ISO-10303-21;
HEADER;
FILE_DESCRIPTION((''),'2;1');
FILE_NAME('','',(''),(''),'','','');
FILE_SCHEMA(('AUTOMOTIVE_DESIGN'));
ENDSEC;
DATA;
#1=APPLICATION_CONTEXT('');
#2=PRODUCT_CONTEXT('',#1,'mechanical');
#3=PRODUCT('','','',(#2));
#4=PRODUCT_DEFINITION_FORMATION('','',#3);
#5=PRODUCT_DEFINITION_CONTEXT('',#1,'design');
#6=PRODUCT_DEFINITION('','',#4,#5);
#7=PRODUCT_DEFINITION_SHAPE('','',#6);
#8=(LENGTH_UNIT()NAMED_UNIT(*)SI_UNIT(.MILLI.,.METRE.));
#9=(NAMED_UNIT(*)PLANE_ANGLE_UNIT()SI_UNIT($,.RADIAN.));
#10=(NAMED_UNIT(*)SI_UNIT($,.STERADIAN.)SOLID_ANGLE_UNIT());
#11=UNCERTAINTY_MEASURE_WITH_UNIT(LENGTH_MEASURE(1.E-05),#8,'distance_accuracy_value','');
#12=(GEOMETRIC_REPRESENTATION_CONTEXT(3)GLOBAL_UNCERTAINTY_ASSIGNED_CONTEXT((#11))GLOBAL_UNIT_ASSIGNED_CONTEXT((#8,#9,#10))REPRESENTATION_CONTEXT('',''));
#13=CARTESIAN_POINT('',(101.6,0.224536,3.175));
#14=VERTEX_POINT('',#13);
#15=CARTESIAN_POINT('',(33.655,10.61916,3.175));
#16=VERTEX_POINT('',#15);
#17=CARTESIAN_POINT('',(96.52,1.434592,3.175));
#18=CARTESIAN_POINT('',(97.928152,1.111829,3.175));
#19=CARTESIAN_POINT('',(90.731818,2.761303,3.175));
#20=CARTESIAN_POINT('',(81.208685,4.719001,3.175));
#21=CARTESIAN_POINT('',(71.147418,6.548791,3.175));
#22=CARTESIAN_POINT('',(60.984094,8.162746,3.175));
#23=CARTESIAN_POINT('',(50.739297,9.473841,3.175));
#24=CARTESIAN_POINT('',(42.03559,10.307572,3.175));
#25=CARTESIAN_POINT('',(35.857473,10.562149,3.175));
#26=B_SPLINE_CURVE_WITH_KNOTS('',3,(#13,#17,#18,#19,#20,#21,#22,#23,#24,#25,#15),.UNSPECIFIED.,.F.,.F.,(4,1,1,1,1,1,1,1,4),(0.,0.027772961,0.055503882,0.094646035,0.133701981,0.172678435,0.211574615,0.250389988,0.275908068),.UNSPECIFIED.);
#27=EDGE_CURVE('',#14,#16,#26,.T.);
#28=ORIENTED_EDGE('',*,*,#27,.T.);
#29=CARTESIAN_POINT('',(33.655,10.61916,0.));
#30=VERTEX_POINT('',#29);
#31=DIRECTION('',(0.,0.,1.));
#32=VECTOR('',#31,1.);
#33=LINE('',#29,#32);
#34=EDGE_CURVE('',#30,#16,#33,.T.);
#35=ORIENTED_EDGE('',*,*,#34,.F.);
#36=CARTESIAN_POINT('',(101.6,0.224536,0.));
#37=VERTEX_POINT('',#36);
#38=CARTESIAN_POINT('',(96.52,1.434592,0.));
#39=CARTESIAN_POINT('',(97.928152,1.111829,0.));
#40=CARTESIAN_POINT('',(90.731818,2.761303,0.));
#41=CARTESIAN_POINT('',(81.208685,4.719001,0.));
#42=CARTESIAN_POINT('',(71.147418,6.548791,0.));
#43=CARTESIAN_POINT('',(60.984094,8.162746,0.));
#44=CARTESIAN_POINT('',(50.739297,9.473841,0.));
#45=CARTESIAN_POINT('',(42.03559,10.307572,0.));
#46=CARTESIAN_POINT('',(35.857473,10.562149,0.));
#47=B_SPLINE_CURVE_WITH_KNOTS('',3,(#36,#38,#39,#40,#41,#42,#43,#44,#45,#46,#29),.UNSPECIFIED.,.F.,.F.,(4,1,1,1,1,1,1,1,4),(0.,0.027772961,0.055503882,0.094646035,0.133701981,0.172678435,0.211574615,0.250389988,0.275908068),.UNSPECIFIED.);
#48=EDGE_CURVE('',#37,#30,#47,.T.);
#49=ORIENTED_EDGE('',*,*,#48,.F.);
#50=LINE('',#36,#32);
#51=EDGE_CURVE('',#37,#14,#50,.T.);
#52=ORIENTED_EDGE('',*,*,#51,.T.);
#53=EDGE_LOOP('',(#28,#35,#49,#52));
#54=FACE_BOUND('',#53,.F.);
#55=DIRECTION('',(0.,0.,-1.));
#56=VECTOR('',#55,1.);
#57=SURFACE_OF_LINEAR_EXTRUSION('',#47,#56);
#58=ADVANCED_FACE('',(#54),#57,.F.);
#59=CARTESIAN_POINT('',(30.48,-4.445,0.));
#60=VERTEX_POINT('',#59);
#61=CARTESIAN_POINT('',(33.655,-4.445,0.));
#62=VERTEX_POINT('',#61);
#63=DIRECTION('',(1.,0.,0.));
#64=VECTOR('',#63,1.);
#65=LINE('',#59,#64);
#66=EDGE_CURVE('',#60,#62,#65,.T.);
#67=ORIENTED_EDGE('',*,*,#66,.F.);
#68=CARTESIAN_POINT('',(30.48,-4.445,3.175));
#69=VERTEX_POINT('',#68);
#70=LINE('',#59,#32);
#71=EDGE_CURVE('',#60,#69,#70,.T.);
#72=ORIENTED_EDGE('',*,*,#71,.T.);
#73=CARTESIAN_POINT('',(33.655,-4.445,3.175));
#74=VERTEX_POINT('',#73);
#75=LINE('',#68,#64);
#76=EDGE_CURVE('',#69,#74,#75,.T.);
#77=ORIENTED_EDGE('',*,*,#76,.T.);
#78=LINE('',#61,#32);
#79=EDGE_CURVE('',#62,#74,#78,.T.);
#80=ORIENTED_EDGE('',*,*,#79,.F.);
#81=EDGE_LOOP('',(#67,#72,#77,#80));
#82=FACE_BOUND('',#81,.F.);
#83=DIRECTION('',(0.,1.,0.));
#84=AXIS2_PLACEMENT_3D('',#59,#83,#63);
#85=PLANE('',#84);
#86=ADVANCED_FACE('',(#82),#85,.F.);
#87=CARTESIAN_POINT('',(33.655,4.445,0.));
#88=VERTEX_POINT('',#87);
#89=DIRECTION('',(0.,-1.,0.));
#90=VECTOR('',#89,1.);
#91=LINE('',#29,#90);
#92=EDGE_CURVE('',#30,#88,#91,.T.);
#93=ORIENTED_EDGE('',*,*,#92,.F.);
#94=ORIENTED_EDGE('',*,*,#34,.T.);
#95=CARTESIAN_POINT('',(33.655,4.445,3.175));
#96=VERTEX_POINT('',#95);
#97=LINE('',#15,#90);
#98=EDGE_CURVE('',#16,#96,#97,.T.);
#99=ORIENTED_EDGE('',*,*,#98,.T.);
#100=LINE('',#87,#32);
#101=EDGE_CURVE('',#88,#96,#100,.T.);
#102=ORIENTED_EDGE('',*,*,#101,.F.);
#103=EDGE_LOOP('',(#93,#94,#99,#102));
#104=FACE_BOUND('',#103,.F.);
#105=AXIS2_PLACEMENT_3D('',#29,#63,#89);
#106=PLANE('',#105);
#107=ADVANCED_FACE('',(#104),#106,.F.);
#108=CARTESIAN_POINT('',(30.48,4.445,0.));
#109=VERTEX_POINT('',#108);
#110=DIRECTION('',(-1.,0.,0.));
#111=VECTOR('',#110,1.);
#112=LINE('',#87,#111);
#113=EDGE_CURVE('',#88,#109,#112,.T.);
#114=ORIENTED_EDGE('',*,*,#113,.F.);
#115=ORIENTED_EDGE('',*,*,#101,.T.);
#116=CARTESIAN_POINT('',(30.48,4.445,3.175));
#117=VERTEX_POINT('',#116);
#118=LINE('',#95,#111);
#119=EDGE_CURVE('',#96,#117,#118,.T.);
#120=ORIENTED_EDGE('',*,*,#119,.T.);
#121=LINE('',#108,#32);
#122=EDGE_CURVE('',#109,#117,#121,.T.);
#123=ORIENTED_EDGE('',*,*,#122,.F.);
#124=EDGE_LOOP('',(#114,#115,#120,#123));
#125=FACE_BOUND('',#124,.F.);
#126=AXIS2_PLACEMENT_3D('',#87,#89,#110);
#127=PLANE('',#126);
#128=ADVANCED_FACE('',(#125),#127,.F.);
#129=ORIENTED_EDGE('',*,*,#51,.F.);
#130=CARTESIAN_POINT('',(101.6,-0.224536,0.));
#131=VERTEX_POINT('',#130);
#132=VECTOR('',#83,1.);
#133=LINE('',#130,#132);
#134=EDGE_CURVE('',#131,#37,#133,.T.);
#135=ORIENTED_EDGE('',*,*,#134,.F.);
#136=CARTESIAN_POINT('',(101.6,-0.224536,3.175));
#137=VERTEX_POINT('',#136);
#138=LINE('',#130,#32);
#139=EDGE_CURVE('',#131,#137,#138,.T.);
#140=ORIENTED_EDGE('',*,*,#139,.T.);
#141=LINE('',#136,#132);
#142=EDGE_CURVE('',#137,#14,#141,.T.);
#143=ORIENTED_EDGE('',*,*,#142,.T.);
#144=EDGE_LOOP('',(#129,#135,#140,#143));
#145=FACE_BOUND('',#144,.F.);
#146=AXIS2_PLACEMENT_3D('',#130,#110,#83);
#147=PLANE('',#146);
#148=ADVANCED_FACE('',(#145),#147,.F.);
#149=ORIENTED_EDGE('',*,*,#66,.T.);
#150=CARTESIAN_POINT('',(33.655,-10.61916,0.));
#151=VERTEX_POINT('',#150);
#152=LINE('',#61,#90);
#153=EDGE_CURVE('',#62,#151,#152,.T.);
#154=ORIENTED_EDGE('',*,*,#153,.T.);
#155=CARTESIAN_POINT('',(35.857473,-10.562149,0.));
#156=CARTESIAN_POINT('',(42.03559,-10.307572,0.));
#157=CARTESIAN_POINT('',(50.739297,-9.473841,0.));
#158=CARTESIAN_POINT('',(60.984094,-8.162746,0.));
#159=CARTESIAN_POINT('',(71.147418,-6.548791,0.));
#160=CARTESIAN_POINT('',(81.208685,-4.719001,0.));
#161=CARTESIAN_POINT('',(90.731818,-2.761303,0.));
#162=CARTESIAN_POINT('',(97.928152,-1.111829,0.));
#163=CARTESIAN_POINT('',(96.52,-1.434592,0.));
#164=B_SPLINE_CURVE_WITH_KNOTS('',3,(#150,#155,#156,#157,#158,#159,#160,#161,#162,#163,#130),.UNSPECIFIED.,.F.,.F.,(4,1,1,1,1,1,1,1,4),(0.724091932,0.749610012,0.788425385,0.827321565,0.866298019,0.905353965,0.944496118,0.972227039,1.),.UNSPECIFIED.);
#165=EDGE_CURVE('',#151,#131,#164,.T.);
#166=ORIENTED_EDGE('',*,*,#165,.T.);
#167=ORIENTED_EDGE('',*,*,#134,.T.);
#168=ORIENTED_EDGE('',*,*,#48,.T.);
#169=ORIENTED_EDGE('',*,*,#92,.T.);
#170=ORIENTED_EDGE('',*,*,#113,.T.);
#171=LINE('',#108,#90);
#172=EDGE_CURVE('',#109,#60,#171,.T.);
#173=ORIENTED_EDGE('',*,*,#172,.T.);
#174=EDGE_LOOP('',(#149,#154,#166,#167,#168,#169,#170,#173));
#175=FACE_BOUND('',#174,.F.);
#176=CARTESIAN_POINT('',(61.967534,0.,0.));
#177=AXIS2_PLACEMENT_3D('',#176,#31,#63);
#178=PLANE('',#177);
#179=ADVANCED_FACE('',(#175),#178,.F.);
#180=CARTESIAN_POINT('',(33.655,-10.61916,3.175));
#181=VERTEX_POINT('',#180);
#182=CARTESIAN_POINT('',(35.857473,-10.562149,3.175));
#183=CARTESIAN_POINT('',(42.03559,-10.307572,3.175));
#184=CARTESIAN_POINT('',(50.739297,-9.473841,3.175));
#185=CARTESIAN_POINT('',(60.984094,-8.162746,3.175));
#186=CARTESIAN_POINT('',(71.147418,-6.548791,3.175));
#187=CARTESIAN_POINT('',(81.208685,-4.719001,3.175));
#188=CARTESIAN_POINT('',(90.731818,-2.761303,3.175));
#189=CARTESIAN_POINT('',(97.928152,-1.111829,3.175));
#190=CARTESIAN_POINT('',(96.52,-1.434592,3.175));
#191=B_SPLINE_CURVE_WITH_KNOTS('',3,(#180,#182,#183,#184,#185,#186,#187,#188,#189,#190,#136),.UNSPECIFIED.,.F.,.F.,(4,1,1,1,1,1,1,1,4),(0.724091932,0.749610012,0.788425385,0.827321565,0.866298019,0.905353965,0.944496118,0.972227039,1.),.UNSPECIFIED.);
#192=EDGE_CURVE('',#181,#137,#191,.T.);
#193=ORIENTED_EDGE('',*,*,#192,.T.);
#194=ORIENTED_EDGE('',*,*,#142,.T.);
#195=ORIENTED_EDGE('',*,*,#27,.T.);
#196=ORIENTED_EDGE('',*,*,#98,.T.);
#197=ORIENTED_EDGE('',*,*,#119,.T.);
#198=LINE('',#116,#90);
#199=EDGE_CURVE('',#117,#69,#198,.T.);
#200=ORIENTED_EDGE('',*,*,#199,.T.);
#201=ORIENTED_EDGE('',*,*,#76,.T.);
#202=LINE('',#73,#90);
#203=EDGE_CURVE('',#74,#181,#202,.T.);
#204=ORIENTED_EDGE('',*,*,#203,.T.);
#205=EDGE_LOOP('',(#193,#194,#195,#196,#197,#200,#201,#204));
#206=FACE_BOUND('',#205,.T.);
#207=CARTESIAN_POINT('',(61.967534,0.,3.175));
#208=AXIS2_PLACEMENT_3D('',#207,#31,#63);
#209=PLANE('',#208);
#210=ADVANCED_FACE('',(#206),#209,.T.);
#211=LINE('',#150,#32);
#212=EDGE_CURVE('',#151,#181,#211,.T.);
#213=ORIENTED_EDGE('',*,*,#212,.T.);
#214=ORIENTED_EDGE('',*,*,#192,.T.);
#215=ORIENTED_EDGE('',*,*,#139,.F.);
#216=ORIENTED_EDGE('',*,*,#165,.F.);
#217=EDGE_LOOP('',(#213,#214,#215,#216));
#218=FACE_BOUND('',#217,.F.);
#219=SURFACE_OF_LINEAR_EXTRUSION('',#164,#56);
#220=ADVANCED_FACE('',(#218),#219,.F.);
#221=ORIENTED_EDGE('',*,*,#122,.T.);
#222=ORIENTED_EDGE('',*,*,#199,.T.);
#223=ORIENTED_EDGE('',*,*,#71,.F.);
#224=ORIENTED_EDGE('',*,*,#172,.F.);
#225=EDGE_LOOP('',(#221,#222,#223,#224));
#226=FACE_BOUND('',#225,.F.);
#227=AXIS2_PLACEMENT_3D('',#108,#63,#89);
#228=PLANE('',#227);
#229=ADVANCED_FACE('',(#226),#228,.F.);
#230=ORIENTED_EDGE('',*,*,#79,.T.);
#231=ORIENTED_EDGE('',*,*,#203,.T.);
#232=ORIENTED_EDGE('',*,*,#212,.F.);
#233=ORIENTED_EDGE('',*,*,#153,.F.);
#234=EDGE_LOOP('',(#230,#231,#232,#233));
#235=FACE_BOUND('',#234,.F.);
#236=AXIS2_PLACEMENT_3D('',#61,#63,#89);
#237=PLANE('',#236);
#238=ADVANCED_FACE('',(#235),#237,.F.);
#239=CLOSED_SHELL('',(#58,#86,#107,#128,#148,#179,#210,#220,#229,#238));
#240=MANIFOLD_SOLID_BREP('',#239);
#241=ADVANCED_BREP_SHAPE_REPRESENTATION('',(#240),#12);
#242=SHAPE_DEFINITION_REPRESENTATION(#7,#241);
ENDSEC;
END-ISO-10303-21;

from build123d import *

# Parameters (mm, degrees)
F1_DEPTH = 3.175


with BuildPart() as f1:
    # F0 (on Top) → F1 (new body)
    with BuildSketch(Plane.XY):
        with BuildLine():
            Line((101.6, -0.224536), (101.6, 0.224536))
            add(Edge.make_bspline(
                [(101.6, 0.224536), (96.52, 1.434592), (97.928151728, 1.1118290006), (90.7318181321, 2.7613033932), (81.2086848949, 4.7190014757), (71.1474182421, 6.548791401), (60.9840942626, 8.1627459667), (50.7392971205, 9.4738409458), (42.0355898066, 10.3075715865), (35.8574731401, 10.5621488671), (33.655, 10.6191598962)],
                knots=[0, 0, 0, 0, 0.0277729611, 0.0555038819, 0.0946460349, 0.133701981, 0.1726784354, 0.211574615, 0.2503899882, 0.2759080683, 0.2759080683, 0.2759080683, 0.2759080683], degree=3))
            Line((33.655, 10.6191598962), (33.655, 4.445))
            Line((33.655, 4.445), (30.48, 4.445))
            Line((30.48, 4.445), (30.48, -4.445))
            Line((30.48, -4.445), (33.655, -4.445))
            Line((33.655, -4.445), (33.655, -10.6191598962))
            add(Edge.make_bspline(
                [(33.655, -10.6191598962), (35.8574731401, -10.5621488671), (42.0355898066, -10.3075715865), (50.7392971205, -9.4738409458), (60.9840942626, -8.1627459667), (71.1474182421, -6.548791401), (81.2086848949, -4.7190014757), (90.7318181321, -2.7613033932), (97.928151728, -1.1118290006), (96.52, -1.434592), (101.6, -0.224536)],
                knots=[0.7240919317, 0.7240919317, 0.7240919317, 0.7240919317, 0.7496100118, 0.788425385, 0.8273215646, 0.866298019, 0.9053539651, 0.9444961181, 0.9722270389, 1, 1, 1, 1], degree=3))
        make_face()
    extrude(amount=F1_DEPTH)


solid = f1.part
